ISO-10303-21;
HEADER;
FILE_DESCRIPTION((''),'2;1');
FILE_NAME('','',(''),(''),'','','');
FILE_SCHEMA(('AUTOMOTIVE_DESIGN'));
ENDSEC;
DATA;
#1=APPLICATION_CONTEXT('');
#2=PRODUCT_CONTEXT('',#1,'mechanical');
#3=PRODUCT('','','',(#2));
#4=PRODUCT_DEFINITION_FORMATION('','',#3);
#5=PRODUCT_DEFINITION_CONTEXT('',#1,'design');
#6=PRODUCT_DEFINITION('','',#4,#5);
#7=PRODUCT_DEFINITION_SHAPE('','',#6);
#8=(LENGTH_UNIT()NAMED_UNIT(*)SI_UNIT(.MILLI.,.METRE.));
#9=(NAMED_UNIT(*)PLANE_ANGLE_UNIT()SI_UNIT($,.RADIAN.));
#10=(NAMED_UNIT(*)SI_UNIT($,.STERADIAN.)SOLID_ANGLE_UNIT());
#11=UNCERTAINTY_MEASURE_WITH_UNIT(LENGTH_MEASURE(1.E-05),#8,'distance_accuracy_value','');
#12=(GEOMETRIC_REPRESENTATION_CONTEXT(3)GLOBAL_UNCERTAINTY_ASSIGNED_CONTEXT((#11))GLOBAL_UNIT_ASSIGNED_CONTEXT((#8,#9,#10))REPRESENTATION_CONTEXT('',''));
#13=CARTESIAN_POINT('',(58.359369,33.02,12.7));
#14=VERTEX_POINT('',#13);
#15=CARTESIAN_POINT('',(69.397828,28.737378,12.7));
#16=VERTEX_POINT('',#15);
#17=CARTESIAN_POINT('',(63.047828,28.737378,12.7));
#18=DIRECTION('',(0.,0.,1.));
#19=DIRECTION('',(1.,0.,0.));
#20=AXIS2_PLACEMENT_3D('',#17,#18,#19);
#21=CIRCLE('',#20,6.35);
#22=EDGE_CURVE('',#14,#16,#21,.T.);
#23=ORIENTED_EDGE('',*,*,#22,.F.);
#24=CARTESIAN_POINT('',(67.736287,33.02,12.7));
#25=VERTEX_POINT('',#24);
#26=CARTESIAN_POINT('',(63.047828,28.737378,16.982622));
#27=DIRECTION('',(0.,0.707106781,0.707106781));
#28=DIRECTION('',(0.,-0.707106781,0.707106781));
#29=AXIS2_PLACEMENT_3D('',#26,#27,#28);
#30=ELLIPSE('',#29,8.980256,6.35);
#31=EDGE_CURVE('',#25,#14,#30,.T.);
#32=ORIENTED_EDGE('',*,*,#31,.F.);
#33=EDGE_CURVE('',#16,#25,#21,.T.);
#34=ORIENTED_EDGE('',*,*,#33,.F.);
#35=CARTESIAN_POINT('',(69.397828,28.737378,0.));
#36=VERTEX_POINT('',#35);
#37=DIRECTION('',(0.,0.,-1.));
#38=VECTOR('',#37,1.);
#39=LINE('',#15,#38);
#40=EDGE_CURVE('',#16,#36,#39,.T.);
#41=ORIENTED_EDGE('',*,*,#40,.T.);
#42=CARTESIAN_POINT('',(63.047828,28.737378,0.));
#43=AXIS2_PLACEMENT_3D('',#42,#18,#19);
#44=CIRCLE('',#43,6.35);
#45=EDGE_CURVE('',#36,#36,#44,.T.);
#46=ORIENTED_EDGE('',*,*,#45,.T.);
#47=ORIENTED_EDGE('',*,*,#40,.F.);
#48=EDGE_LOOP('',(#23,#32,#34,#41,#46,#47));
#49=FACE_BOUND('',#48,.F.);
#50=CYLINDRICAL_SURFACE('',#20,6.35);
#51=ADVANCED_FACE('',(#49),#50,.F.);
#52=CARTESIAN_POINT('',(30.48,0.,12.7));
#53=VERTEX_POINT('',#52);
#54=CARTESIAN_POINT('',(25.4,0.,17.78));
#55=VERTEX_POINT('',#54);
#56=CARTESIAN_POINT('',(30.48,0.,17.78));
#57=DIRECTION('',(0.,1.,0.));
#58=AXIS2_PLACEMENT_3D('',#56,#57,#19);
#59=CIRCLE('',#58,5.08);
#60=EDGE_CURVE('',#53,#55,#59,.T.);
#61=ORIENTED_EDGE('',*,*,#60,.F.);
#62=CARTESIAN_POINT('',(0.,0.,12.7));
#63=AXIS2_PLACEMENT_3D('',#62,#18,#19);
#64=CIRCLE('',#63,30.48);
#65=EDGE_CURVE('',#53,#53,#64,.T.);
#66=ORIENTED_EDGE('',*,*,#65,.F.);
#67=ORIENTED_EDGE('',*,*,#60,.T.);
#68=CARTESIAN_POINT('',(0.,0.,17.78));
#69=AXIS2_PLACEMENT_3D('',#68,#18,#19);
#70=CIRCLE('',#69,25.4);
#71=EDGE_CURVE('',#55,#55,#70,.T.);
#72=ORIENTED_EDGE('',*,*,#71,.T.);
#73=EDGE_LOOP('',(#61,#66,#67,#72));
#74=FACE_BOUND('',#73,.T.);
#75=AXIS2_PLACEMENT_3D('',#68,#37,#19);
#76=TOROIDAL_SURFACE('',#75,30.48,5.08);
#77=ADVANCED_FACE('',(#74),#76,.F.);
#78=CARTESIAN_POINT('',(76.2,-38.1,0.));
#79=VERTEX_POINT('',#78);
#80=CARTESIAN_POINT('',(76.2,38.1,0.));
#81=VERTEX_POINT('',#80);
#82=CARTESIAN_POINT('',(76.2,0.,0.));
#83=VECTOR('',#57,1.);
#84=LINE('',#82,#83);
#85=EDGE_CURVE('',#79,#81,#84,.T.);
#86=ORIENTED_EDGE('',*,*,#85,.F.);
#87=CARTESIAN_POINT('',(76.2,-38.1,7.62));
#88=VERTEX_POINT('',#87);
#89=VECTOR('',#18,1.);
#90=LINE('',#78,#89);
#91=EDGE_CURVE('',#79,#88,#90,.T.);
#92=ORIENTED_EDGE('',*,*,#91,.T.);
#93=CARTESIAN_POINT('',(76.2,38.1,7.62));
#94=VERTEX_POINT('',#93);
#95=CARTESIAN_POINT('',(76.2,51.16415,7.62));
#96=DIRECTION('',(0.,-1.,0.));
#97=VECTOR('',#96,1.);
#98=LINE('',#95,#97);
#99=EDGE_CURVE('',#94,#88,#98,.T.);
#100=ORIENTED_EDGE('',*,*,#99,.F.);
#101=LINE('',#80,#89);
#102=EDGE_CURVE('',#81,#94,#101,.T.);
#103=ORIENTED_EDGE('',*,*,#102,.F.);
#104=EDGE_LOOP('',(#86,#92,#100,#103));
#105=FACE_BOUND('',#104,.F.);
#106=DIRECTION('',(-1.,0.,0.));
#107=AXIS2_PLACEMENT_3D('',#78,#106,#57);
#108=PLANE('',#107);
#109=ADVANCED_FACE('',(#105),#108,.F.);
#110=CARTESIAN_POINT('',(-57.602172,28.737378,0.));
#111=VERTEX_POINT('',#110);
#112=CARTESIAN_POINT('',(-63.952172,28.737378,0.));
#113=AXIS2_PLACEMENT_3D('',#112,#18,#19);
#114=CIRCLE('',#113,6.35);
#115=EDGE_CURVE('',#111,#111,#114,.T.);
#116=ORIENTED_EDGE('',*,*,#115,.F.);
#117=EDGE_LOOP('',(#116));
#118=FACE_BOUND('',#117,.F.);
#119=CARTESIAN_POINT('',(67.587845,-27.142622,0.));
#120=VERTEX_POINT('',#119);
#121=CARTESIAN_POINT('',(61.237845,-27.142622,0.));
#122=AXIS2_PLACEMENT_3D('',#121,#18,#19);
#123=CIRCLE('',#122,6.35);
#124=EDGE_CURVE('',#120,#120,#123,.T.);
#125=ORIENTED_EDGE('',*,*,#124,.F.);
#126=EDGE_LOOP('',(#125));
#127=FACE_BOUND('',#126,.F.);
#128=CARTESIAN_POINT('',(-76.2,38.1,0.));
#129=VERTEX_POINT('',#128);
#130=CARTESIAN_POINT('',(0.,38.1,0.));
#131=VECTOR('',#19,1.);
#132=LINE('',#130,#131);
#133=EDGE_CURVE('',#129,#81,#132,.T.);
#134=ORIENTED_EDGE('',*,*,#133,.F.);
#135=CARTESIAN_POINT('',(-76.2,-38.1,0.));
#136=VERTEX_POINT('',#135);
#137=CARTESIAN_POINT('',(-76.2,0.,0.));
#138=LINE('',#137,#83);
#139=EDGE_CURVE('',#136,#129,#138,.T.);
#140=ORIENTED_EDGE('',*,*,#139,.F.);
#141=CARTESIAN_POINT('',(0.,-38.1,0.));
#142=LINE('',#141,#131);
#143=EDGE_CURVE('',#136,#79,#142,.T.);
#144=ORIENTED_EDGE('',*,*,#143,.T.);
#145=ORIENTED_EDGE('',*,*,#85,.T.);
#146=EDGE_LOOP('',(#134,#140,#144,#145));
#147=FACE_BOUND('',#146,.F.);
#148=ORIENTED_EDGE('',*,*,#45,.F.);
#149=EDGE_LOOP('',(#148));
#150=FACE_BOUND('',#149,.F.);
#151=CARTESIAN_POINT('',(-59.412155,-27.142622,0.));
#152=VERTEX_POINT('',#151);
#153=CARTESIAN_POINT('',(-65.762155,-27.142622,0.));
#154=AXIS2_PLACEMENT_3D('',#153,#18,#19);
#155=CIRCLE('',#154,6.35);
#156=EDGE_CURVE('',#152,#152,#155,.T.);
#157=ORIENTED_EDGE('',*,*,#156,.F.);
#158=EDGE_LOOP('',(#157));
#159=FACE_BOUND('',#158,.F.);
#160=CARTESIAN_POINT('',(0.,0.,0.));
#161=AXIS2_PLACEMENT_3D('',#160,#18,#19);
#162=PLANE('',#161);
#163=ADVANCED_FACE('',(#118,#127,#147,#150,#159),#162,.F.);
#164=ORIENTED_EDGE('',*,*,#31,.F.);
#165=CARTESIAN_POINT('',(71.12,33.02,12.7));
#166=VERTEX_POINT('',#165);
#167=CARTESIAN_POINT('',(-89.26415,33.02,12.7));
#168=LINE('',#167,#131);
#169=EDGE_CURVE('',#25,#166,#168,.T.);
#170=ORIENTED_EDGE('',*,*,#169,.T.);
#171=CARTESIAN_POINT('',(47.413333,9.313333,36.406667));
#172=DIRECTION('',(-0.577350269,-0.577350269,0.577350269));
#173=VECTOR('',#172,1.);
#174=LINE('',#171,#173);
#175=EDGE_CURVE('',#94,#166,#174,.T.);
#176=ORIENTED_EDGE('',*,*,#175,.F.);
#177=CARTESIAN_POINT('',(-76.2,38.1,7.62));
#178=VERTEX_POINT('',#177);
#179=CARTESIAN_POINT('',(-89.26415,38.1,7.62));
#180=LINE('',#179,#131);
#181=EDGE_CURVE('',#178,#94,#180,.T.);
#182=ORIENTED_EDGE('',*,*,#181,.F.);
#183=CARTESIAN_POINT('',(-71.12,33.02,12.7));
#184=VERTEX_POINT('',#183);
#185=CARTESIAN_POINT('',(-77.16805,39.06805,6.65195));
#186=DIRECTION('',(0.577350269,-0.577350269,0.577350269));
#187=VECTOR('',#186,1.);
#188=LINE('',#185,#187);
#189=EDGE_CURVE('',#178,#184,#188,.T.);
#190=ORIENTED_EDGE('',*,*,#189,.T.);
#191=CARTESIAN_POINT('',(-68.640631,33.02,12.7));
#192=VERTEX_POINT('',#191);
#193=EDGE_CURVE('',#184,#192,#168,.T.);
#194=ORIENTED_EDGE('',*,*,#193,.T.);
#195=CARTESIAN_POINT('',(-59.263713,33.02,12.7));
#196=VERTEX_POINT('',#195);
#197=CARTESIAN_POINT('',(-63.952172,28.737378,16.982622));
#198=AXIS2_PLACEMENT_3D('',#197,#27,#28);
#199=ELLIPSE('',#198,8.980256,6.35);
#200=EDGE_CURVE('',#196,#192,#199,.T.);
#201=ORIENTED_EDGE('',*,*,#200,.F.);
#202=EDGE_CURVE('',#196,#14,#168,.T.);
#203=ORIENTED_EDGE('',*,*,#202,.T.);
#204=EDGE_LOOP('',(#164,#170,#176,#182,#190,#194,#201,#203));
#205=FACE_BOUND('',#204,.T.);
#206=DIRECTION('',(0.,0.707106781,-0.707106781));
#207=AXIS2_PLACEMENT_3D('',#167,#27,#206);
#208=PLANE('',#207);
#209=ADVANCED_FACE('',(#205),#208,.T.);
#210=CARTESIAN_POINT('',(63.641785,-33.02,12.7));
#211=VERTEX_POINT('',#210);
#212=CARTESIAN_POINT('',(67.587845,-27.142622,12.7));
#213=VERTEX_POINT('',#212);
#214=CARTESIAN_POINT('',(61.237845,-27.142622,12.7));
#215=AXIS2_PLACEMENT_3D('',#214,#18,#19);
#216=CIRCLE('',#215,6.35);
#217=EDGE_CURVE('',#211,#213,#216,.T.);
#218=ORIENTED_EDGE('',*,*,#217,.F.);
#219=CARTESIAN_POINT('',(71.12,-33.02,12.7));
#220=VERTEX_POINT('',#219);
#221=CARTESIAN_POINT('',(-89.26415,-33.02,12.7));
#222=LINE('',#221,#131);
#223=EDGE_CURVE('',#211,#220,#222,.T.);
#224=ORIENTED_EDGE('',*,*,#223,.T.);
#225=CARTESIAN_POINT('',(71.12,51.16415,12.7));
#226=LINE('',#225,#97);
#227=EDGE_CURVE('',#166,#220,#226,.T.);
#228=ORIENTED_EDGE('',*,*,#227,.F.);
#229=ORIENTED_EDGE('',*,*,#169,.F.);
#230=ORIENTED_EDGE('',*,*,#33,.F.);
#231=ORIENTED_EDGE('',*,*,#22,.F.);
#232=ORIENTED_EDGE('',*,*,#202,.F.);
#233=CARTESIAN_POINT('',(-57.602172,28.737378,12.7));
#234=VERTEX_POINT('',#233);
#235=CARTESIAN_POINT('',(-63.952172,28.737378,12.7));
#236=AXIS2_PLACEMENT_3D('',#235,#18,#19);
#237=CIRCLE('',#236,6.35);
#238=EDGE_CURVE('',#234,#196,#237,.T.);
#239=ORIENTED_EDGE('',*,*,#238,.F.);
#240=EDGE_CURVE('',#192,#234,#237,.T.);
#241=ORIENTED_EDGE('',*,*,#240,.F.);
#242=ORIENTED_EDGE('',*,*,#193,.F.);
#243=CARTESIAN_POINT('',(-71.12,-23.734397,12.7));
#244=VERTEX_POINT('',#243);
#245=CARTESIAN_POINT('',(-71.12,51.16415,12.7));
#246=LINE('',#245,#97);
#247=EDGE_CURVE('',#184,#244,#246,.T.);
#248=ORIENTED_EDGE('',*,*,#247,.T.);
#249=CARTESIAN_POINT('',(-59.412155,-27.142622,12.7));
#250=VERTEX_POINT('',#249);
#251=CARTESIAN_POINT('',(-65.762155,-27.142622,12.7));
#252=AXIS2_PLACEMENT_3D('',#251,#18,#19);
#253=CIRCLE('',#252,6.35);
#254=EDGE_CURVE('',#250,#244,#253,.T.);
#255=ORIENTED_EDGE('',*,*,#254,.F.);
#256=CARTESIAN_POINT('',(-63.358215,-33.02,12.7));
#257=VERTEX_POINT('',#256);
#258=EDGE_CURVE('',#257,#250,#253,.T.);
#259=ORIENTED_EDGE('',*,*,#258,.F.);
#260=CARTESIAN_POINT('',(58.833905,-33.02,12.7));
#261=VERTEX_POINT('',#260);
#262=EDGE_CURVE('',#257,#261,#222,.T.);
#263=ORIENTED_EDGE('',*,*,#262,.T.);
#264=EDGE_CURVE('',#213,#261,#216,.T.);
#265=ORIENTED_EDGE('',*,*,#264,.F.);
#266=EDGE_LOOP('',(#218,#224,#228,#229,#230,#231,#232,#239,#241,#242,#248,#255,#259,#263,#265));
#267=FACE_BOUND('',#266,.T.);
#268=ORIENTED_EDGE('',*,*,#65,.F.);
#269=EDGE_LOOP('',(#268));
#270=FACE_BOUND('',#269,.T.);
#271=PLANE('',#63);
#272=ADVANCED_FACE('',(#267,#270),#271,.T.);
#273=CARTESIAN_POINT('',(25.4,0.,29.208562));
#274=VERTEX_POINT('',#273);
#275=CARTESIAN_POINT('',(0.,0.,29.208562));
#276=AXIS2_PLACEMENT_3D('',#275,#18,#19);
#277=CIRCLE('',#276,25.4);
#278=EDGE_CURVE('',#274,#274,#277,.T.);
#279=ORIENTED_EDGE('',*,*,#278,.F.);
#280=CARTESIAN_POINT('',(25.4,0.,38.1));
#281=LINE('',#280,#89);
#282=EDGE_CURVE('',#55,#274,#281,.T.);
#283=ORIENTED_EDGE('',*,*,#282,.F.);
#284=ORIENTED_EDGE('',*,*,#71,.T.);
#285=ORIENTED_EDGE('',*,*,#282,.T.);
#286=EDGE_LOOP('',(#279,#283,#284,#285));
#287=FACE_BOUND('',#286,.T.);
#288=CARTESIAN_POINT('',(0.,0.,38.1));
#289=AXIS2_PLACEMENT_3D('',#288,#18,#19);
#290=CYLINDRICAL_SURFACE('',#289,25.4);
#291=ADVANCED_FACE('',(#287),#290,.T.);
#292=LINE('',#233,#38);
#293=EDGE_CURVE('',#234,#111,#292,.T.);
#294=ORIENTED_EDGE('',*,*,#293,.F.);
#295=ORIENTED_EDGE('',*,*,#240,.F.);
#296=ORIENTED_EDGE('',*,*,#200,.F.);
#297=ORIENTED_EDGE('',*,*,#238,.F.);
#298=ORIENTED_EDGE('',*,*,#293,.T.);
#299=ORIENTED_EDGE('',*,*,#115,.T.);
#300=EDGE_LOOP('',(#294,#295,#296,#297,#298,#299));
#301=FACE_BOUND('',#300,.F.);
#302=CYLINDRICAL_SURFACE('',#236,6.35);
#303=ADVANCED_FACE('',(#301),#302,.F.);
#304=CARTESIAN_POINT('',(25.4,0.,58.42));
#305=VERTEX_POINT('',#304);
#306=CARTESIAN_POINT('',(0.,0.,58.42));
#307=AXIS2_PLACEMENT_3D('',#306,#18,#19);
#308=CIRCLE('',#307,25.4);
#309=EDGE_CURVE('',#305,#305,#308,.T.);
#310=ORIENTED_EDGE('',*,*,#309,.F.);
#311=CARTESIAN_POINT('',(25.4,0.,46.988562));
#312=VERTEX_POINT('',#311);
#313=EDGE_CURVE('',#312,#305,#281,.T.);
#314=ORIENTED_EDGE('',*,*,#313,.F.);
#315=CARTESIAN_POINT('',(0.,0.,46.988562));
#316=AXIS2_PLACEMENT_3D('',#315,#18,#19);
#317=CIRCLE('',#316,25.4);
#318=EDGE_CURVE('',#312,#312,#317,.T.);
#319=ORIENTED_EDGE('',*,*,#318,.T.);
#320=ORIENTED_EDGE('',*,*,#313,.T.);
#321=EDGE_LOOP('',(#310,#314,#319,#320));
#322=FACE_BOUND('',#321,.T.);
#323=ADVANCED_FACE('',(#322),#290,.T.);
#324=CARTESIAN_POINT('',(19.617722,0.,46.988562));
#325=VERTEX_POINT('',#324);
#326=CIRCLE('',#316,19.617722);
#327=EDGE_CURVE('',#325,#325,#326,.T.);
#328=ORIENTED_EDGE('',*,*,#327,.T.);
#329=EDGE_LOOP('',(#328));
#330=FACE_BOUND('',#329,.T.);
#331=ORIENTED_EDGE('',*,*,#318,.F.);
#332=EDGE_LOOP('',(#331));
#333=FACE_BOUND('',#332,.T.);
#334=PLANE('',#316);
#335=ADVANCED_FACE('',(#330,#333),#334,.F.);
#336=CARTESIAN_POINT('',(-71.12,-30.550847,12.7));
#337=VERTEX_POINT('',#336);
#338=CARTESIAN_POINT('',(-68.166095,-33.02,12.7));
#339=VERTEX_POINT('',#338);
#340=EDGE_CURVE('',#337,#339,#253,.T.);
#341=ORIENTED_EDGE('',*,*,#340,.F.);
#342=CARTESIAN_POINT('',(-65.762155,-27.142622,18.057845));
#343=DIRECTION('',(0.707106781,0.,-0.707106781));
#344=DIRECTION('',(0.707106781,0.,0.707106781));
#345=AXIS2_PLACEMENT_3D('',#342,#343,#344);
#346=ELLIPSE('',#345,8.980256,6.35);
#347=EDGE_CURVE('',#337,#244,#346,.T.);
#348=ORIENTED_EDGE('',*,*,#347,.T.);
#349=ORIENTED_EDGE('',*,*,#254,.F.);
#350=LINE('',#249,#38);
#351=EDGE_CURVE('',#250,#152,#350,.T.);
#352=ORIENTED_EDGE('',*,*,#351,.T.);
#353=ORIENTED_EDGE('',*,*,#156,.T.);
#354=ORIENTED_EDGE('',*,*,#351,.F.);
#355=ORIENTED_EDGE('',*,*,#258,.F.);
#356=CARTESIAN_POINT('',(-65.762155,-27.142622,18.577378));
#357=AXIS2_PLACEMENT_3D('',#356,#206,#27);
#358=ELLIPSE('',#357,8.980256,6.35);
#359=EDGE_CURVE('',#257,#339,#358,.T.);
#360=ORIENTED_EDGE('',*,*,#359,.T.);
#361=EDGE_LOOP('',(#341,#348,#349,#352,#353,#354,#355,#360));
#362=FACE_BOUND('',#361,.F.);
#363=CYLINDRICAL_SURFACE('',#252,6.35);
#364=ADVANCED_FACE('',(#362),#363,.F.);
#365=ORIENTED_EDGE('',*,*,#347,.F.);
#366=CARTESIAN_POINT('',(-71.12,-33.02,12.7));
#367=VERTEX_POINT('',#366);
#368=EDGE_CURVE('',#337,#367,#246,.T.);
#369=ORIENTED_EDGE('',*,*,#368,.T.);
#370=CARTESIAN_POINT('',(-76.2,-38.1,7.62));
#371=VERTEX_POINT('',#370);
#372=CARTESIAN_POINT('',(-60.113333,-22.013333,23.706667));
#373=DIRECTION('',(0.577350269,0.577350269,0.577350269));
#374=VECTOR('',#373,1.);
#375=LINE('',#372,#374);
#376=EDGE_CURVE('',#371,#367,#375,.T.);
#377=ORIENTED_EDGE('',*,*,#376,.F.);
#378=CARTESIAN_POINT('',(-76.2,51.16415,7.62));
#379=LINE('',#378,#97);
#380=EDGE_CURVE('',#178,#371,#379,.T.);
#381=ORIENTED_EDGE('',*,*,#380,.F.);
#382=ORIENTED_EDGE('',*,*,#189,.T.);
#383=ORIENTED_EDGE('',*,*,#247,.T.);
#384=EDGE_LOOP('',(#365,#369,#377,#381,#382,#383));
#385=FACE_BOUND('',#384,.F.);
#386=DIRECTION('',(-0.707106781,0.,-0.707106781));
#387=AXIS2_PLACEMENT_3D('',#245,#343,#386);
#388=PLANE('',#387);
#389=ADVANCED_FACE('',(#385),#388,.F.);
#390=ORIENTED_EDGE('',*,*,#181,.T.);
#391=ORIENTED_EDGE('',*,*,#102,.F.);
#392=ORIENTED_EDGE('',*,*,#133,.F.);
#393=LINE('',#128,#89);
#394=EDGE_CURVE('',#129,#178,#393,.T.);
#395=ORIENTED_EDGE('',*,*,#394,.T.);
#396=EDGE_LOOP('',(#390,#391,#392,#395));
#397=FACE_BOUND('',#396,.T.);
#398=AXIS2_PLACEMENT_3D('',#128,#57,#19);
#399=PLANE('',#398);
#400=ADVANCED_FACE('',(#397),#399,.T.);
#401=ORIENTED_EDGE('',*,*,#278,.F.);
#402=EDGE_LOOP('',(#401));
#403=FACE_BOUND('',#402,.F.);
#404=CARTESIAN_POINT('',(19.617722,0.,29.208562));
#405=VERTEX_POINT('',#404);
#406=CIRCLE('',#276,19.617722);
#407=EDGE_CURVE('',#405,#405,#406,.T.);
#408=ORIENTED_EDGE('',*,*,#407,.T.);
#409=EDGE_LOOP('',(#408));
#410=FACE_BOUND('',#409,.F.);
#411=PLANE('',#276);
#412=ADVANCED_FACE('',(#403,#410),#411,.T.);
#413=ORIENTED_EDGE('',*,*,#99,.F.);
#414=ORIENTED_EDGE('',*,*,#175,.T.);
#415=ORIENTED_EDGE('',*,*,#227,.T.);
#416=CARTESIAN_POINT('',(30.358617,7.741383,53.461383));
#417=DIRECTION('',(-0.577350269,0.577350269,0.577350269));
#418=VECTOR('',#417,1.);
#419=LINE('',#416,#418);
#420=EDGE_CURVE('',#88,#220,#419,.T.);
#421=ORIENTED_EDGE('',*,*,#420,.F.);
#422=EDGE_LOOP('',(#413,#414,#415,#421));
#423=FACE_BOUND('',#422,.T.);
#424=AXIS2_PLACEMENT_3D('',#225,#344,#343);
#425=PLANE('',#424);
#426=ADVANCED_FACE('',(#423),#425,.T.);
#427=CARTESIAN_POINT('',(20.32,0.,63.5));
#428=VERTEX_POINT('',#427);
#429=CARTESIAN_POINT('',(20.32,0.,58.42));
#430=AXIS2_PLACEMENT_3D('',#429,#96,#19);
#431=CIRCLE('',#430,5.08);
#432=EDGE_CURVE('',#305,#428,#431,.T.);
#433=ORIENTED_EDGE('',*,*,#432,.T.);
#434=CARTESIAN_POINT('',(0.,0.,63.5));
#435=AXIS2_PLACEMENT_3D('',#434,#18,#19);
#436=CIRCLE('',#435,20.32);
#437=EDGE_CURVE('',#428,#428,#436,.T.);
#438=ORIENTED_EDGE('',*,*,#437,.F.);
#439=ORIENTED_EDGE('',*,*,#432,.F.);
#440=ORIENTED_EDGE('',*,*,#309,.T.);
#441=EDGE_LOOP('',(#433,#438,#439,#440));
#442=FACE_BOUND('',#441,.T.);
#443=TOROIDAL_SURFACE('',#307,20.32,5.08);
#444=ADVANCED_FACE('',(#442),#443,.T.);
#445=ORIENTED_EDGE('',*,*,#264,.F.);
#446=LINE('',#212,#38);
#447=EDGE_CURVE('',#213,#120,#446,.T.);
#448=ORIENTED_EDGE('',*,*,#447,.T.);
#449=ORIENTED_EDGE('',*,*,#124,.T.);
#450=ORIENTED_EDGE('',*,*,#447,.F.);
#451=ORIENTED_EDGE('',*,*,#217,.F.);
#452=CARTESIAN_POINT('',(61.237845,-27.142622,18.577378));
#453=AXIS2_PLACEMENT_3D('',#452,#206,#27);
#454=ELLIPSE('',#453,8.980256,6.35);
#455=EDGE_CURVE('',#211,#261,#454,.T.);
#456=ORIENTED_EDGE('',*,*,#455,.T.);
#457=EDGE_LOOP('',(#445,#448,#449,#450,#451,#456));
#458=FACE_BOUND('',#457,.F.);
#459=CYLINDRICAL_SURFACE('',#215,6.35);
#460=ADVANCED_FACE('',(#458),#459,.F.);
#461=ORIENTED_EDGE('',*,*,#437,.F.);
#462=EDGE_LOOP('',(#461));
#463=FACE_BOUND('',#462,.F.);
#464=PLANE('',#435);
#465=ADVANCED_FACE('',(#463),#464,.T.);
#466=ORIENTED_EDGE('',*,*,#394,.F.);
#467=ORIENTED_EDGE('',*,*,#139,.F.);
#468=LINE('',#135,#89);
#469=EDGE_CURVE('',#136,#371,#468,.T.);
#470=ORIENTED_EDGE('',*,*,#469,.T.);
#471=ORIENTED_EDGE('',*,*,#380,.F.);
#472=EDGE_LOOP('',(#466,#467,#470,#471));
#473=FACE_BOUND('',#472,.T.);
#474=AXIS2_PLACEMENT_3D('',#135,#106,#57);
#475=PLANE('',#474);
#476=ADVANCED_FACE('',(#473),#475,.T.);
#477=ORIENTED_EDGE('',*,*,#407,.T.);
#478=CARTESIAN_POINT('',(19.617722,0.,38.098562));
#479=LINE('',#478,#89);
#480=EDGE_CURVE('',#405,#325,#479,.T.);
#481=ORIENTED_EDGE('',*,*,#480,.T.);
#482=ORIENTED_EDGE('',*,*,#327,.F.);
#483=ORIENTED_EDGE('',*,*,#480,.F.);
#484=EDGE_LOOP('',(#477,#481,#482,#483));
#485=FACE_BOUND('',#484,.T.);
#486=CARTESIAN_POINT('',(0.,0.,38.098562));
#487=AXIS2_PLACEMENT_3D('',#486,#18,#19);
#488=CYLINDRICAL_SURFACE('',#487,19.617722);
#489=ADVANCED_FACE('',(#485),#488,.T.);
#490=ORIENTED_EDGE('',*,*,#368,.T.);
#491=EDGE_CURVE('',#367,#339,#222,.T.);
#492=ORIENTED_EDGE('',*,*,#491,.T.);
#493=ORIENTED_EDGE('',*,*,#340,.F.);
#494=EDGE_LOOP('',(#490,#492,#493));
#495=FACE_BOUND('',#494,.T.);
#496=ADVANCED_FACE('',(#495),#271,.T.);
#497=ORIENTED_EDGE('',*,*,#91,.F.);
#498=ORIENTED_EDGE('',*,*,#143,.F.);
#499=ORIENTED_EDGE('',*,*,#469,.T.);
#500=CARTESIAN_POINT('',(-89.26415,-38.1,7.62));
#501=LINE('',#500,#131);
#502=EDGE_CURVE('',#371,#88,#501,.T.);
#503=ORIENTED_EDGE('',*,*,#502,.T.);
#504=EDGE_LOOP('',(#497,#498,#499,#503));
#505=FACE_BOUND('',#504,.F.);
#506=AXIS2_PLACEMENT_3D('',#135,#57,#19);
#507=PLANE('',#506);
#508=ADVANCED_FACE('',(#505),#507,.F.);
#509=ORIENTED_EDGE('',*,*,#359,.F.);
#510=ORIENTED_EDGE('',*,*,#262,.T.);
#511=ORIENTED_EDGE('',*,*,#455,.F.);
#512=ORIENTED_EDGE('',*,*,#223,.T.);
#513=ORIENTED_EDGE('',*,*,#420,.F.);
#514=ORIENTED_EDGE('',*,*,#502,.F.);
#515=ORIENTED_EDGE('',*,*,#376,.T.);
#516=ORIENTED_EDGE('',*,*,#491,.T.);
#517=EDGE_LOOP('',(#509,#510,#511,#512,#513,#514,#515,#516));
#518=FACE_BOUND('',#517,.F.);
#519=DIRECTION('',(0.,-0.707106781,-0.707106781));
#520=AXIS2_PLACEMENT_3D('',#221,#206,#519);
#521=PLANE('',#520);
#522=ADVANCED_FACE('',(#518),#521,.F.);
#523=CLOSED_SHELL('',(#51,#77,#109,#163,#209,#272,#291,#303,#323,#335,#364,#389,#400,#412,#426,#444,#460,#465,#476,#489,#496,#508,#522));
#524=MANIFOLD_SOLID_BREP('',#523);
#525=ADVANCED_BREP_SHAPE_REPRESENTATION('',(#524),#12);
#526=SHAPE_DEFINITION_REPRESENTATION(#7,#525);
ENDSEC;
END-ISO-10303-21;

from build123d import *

# Parameters (mm, degrees)
F0_W        = 152.4
F0_H        = 76.2
F1_DEPTH    = 12.7
F2_R        = 6.35
F3_DEPTH    = 12.701
F4_W        = 25.4
F4_H        = 50.8
F6_W        = 11.3594501876
F6_H        = 17.78
F8_R        = 5.08
F9_T1_DEPTH = 102.3282991577
F9_T3_DEPTH = 178.5282991577


# Not quite as in the source:
# - a fillet or chamfer that OpenCascade refuses, or shapes differently, is made with other operations: its cross-section is extruded or revolved along the edge and cut away or added


with BuildPart() as f1:
    # F0 (on Top) → F1 (new body)
    with BuildSketch(Plane.XY):
        Rectangle(F0_W, F0_H)
    extrude(amount=F1_DEPTH)

    # F2 (on face) → F3 (cut, through all)
    with BuildSketch(Plane.XY.offset(12.7)):
        with Locations((-63.9521719884, 28.7373781539)):
            Circle(F2_R)
        with Locations((-65.762154874, -27.1426218461)):
            Circle(F2_R)
        with Locations((63.0478280116, 28.7373781539)):
            Circle(F2_R)
        with Locations((61.237845126, -27.1426218461)):
            Circle(F2_R)
    extrude(amount=-F3_DEPTH, mode=Mode.SUBTRACT)

    # F4 (on Front) → F5 (revolve)
    with BuildSketch(Plane.XZ):
        with Locations((12.7, 38.1)):
            Rectangle(F4_W, F4_H)
    revolve(axis=Axis((0, 0, 38.1), (0, 0, 1)))

    # F6 (on Front) → F7 (revolve, cut)
    with BuildSketch(Plane.XZ):
        with Locations((25.2974471077, 38.0985615775)):
            Rectangle(F6_W, F6_H)
    revolve(axis=Axis((0, 0, 12.7), (0, 0, 1)), mode=Mode.SUBTRACT)

    # F8
    f8_edges = [f1.edges().sort_by_distance(p)[0] for p in [
        (-25.4, 0, 63.5),
        (-25.4, 0, 12.7),
    ]]
    fillet(f8_edges, radius=F8_R)

    # F9: chamfer of 5.08 on 4 edges, made by hand

    # F9_s2 → F9_t1 (cut)
    with BuildSketch(Plane.XZ.offset(-51.1641495789)):
        Polygon((71.12, 12.7), (76.2, 7.62), (76.2, 12.7), align=None)
        Polygon((-71.12, 12.7), (-76.2, 7.62), (-76.2, 12.7), align=None)
    extrude(amount=F9_T1_DEPTH, mode=Mode.SUBTRACT)

    # F9_s4 → F9_t3 (cut)
    with BuildSketch(Plane.YZ.offset(-89.2641495789)):
        Polygon((33.02, 12.7), (38.1, 7.62), (38.1, 12.7), align=None)
        Polygon((-33.02, 12.7), (-38.1, 7.62), (-38.1, 12.7), align=None)
    extrude(amount=F9_T3_DEPTH, mode=Mode.SUBTRACT)


solid = f1.part
